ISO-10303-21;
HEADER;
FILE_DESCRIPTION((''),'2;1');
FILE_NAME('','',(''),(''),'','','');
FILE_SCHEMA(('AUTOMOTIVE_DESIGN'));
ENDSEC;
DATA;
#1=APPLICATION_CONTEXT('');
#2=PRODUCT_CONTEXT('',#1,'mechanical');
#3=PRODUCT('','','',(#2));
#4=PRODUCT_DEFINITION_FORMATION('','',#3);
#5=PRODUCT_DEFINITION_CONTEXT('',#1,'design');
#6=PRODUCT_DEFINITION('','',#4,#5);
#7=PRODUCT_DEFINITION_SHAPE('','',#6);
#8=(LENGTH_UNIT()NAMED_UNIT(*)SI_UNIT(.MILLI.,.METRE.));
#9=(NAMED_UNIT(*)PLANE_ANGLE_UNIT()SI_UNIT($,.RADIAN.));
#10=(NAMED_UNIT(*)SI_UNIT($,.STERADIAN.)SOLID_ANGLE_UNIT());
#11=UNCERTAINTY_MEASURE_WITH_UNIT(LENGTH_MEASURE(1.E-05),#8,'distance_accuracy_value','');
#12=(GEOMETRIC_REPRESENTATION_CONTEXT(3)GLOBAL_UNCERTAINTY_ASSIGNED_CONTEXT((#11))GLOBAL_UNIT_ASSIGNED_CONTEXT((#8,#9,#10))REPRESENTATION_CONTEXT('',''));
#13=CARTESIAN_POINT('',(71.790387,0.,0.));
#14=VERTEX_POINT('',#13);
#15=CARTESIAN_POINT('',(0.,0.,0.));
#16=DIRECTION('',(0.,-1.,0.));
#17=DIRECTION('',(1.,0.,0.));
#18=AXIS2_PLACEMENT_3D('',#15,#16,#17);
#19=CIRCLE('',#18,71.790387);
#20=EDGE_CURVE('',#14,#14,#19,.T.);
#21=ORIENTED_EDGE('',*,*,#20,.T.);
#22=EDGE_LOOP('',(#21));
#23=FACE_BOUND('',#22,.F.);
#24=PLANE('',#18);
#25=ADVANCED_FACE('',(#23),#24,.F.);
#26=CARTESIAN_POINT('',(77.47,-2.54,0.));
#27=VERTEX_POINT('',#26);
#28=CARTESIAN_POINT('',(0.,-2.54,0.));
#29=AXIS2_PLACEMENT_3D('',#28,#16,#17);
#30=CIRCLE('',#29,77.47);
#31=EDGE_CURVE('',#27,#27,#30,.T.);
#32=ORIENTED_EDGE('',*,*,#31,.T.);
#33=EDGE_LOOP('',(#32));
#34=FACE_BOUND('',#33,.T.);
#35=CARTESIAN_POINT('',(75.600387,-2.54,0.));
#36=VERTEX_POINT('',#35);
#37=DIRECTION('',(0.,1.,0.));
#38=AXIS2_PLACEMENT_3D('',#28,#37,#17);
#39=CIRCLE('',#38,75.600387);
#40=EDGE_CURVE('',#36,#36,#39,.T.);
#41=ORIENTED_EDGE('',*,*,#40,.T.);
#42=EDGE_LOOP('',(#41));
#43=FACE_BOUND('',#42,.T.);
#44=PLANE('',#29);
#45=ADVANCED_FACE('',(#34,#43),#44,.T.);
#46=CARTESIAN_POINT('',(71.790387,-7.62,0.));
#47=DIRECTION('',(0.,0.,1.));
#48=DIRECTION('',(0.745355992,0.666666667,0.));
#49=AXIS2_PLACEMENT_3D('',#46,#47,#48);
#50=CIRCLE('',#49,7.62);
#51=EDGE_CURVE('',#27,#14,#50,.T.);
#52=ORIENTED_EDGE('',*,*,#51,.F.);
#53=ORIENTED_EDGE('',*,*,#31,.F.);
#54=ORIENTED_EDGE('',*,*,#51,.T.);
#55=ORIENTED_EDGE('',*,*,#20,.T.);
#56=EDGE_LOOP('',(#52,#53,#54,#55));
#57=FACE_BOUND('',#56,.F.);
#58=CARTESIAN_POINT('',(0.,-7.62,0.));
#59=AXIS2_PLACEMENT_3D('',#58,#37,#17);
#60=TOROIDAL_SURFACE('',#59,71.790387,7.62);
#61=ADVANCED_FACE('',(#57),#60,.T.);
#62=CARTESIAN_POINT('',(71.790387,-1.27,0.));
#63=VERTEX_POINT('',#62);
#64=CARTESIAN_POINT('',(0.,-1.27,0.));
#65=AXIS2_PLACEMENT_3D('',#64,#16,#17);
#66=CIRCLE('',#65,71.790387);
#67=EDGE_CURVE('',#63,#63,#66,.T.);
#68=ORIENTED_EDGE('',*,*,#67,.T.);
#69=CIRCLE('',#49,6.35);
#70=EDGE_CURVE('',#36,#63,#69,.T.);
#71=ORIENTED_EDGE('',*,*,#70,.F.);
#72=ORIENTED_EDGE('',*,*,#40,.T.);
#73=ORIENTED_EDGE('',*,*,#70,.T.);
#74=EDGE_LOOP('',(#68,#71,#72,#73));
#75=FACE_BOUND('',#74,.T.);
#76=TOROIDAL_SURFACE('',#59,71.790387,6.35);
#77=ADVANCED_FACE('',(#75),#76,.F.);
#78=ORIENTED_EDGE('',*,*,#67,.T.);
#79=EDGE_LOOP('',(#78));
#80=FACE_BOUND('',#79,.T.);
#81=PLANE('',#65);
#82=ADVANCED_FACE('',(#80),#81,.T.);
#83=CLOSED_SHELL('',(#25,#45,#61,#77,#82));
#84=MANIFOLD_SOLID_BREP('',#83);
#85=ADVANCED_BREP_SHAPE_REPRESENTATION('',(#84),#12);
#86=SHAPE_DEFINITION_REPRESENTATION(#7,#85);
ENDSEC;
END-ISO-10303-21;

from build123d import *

# Parameters (mm, degrees)
F0_R     = 77.47
F1_DEPTH = 2.54
F3_T     = -1.27


# Not quite as in the source:
# - a fillet or chamfer that OpenCascade refuses, or shapes differently, is made with other operations: its cross-section is extruded or revolved along the edge and cut away or added
# - a feature names something its author has since deleted; it is built from what else it names


with BuildPart() as f1:
    # F0 (on Front) → F1 (new body)
    with BuildSketch(Plane.XZ):
        Circle(F0_R)
    extrude(amount=F1_DEPTH)

    # F2: fillet of radius 7.62 on 1 edges, made by hand

    # F2_s1 → F2_t2 (revolve, cut)
    with BuildSketch(Plane.XY):
        with BuildLine():
            ThreePointArc((77.47, -2.54), (74.9012393105, -0.6639235197), (71.7903873372, 0))
            Line((71.7903873372, 0), (77.47, 0))
            Line((77.47, 0), (77.47, -2.54))
        make_face()
    revolve(axis=Axis((0, 0, 0), (0, -1, 0)), mode=Mode.SUBTRACT)

    # F3
    f3_openings = [f1.faces().sort_by_distance(p)[0] for p in [
        (0, -2.54, 0),
    ]]
    offset(amount=F3_T, openings=f3_openings)


solid = f1.part
